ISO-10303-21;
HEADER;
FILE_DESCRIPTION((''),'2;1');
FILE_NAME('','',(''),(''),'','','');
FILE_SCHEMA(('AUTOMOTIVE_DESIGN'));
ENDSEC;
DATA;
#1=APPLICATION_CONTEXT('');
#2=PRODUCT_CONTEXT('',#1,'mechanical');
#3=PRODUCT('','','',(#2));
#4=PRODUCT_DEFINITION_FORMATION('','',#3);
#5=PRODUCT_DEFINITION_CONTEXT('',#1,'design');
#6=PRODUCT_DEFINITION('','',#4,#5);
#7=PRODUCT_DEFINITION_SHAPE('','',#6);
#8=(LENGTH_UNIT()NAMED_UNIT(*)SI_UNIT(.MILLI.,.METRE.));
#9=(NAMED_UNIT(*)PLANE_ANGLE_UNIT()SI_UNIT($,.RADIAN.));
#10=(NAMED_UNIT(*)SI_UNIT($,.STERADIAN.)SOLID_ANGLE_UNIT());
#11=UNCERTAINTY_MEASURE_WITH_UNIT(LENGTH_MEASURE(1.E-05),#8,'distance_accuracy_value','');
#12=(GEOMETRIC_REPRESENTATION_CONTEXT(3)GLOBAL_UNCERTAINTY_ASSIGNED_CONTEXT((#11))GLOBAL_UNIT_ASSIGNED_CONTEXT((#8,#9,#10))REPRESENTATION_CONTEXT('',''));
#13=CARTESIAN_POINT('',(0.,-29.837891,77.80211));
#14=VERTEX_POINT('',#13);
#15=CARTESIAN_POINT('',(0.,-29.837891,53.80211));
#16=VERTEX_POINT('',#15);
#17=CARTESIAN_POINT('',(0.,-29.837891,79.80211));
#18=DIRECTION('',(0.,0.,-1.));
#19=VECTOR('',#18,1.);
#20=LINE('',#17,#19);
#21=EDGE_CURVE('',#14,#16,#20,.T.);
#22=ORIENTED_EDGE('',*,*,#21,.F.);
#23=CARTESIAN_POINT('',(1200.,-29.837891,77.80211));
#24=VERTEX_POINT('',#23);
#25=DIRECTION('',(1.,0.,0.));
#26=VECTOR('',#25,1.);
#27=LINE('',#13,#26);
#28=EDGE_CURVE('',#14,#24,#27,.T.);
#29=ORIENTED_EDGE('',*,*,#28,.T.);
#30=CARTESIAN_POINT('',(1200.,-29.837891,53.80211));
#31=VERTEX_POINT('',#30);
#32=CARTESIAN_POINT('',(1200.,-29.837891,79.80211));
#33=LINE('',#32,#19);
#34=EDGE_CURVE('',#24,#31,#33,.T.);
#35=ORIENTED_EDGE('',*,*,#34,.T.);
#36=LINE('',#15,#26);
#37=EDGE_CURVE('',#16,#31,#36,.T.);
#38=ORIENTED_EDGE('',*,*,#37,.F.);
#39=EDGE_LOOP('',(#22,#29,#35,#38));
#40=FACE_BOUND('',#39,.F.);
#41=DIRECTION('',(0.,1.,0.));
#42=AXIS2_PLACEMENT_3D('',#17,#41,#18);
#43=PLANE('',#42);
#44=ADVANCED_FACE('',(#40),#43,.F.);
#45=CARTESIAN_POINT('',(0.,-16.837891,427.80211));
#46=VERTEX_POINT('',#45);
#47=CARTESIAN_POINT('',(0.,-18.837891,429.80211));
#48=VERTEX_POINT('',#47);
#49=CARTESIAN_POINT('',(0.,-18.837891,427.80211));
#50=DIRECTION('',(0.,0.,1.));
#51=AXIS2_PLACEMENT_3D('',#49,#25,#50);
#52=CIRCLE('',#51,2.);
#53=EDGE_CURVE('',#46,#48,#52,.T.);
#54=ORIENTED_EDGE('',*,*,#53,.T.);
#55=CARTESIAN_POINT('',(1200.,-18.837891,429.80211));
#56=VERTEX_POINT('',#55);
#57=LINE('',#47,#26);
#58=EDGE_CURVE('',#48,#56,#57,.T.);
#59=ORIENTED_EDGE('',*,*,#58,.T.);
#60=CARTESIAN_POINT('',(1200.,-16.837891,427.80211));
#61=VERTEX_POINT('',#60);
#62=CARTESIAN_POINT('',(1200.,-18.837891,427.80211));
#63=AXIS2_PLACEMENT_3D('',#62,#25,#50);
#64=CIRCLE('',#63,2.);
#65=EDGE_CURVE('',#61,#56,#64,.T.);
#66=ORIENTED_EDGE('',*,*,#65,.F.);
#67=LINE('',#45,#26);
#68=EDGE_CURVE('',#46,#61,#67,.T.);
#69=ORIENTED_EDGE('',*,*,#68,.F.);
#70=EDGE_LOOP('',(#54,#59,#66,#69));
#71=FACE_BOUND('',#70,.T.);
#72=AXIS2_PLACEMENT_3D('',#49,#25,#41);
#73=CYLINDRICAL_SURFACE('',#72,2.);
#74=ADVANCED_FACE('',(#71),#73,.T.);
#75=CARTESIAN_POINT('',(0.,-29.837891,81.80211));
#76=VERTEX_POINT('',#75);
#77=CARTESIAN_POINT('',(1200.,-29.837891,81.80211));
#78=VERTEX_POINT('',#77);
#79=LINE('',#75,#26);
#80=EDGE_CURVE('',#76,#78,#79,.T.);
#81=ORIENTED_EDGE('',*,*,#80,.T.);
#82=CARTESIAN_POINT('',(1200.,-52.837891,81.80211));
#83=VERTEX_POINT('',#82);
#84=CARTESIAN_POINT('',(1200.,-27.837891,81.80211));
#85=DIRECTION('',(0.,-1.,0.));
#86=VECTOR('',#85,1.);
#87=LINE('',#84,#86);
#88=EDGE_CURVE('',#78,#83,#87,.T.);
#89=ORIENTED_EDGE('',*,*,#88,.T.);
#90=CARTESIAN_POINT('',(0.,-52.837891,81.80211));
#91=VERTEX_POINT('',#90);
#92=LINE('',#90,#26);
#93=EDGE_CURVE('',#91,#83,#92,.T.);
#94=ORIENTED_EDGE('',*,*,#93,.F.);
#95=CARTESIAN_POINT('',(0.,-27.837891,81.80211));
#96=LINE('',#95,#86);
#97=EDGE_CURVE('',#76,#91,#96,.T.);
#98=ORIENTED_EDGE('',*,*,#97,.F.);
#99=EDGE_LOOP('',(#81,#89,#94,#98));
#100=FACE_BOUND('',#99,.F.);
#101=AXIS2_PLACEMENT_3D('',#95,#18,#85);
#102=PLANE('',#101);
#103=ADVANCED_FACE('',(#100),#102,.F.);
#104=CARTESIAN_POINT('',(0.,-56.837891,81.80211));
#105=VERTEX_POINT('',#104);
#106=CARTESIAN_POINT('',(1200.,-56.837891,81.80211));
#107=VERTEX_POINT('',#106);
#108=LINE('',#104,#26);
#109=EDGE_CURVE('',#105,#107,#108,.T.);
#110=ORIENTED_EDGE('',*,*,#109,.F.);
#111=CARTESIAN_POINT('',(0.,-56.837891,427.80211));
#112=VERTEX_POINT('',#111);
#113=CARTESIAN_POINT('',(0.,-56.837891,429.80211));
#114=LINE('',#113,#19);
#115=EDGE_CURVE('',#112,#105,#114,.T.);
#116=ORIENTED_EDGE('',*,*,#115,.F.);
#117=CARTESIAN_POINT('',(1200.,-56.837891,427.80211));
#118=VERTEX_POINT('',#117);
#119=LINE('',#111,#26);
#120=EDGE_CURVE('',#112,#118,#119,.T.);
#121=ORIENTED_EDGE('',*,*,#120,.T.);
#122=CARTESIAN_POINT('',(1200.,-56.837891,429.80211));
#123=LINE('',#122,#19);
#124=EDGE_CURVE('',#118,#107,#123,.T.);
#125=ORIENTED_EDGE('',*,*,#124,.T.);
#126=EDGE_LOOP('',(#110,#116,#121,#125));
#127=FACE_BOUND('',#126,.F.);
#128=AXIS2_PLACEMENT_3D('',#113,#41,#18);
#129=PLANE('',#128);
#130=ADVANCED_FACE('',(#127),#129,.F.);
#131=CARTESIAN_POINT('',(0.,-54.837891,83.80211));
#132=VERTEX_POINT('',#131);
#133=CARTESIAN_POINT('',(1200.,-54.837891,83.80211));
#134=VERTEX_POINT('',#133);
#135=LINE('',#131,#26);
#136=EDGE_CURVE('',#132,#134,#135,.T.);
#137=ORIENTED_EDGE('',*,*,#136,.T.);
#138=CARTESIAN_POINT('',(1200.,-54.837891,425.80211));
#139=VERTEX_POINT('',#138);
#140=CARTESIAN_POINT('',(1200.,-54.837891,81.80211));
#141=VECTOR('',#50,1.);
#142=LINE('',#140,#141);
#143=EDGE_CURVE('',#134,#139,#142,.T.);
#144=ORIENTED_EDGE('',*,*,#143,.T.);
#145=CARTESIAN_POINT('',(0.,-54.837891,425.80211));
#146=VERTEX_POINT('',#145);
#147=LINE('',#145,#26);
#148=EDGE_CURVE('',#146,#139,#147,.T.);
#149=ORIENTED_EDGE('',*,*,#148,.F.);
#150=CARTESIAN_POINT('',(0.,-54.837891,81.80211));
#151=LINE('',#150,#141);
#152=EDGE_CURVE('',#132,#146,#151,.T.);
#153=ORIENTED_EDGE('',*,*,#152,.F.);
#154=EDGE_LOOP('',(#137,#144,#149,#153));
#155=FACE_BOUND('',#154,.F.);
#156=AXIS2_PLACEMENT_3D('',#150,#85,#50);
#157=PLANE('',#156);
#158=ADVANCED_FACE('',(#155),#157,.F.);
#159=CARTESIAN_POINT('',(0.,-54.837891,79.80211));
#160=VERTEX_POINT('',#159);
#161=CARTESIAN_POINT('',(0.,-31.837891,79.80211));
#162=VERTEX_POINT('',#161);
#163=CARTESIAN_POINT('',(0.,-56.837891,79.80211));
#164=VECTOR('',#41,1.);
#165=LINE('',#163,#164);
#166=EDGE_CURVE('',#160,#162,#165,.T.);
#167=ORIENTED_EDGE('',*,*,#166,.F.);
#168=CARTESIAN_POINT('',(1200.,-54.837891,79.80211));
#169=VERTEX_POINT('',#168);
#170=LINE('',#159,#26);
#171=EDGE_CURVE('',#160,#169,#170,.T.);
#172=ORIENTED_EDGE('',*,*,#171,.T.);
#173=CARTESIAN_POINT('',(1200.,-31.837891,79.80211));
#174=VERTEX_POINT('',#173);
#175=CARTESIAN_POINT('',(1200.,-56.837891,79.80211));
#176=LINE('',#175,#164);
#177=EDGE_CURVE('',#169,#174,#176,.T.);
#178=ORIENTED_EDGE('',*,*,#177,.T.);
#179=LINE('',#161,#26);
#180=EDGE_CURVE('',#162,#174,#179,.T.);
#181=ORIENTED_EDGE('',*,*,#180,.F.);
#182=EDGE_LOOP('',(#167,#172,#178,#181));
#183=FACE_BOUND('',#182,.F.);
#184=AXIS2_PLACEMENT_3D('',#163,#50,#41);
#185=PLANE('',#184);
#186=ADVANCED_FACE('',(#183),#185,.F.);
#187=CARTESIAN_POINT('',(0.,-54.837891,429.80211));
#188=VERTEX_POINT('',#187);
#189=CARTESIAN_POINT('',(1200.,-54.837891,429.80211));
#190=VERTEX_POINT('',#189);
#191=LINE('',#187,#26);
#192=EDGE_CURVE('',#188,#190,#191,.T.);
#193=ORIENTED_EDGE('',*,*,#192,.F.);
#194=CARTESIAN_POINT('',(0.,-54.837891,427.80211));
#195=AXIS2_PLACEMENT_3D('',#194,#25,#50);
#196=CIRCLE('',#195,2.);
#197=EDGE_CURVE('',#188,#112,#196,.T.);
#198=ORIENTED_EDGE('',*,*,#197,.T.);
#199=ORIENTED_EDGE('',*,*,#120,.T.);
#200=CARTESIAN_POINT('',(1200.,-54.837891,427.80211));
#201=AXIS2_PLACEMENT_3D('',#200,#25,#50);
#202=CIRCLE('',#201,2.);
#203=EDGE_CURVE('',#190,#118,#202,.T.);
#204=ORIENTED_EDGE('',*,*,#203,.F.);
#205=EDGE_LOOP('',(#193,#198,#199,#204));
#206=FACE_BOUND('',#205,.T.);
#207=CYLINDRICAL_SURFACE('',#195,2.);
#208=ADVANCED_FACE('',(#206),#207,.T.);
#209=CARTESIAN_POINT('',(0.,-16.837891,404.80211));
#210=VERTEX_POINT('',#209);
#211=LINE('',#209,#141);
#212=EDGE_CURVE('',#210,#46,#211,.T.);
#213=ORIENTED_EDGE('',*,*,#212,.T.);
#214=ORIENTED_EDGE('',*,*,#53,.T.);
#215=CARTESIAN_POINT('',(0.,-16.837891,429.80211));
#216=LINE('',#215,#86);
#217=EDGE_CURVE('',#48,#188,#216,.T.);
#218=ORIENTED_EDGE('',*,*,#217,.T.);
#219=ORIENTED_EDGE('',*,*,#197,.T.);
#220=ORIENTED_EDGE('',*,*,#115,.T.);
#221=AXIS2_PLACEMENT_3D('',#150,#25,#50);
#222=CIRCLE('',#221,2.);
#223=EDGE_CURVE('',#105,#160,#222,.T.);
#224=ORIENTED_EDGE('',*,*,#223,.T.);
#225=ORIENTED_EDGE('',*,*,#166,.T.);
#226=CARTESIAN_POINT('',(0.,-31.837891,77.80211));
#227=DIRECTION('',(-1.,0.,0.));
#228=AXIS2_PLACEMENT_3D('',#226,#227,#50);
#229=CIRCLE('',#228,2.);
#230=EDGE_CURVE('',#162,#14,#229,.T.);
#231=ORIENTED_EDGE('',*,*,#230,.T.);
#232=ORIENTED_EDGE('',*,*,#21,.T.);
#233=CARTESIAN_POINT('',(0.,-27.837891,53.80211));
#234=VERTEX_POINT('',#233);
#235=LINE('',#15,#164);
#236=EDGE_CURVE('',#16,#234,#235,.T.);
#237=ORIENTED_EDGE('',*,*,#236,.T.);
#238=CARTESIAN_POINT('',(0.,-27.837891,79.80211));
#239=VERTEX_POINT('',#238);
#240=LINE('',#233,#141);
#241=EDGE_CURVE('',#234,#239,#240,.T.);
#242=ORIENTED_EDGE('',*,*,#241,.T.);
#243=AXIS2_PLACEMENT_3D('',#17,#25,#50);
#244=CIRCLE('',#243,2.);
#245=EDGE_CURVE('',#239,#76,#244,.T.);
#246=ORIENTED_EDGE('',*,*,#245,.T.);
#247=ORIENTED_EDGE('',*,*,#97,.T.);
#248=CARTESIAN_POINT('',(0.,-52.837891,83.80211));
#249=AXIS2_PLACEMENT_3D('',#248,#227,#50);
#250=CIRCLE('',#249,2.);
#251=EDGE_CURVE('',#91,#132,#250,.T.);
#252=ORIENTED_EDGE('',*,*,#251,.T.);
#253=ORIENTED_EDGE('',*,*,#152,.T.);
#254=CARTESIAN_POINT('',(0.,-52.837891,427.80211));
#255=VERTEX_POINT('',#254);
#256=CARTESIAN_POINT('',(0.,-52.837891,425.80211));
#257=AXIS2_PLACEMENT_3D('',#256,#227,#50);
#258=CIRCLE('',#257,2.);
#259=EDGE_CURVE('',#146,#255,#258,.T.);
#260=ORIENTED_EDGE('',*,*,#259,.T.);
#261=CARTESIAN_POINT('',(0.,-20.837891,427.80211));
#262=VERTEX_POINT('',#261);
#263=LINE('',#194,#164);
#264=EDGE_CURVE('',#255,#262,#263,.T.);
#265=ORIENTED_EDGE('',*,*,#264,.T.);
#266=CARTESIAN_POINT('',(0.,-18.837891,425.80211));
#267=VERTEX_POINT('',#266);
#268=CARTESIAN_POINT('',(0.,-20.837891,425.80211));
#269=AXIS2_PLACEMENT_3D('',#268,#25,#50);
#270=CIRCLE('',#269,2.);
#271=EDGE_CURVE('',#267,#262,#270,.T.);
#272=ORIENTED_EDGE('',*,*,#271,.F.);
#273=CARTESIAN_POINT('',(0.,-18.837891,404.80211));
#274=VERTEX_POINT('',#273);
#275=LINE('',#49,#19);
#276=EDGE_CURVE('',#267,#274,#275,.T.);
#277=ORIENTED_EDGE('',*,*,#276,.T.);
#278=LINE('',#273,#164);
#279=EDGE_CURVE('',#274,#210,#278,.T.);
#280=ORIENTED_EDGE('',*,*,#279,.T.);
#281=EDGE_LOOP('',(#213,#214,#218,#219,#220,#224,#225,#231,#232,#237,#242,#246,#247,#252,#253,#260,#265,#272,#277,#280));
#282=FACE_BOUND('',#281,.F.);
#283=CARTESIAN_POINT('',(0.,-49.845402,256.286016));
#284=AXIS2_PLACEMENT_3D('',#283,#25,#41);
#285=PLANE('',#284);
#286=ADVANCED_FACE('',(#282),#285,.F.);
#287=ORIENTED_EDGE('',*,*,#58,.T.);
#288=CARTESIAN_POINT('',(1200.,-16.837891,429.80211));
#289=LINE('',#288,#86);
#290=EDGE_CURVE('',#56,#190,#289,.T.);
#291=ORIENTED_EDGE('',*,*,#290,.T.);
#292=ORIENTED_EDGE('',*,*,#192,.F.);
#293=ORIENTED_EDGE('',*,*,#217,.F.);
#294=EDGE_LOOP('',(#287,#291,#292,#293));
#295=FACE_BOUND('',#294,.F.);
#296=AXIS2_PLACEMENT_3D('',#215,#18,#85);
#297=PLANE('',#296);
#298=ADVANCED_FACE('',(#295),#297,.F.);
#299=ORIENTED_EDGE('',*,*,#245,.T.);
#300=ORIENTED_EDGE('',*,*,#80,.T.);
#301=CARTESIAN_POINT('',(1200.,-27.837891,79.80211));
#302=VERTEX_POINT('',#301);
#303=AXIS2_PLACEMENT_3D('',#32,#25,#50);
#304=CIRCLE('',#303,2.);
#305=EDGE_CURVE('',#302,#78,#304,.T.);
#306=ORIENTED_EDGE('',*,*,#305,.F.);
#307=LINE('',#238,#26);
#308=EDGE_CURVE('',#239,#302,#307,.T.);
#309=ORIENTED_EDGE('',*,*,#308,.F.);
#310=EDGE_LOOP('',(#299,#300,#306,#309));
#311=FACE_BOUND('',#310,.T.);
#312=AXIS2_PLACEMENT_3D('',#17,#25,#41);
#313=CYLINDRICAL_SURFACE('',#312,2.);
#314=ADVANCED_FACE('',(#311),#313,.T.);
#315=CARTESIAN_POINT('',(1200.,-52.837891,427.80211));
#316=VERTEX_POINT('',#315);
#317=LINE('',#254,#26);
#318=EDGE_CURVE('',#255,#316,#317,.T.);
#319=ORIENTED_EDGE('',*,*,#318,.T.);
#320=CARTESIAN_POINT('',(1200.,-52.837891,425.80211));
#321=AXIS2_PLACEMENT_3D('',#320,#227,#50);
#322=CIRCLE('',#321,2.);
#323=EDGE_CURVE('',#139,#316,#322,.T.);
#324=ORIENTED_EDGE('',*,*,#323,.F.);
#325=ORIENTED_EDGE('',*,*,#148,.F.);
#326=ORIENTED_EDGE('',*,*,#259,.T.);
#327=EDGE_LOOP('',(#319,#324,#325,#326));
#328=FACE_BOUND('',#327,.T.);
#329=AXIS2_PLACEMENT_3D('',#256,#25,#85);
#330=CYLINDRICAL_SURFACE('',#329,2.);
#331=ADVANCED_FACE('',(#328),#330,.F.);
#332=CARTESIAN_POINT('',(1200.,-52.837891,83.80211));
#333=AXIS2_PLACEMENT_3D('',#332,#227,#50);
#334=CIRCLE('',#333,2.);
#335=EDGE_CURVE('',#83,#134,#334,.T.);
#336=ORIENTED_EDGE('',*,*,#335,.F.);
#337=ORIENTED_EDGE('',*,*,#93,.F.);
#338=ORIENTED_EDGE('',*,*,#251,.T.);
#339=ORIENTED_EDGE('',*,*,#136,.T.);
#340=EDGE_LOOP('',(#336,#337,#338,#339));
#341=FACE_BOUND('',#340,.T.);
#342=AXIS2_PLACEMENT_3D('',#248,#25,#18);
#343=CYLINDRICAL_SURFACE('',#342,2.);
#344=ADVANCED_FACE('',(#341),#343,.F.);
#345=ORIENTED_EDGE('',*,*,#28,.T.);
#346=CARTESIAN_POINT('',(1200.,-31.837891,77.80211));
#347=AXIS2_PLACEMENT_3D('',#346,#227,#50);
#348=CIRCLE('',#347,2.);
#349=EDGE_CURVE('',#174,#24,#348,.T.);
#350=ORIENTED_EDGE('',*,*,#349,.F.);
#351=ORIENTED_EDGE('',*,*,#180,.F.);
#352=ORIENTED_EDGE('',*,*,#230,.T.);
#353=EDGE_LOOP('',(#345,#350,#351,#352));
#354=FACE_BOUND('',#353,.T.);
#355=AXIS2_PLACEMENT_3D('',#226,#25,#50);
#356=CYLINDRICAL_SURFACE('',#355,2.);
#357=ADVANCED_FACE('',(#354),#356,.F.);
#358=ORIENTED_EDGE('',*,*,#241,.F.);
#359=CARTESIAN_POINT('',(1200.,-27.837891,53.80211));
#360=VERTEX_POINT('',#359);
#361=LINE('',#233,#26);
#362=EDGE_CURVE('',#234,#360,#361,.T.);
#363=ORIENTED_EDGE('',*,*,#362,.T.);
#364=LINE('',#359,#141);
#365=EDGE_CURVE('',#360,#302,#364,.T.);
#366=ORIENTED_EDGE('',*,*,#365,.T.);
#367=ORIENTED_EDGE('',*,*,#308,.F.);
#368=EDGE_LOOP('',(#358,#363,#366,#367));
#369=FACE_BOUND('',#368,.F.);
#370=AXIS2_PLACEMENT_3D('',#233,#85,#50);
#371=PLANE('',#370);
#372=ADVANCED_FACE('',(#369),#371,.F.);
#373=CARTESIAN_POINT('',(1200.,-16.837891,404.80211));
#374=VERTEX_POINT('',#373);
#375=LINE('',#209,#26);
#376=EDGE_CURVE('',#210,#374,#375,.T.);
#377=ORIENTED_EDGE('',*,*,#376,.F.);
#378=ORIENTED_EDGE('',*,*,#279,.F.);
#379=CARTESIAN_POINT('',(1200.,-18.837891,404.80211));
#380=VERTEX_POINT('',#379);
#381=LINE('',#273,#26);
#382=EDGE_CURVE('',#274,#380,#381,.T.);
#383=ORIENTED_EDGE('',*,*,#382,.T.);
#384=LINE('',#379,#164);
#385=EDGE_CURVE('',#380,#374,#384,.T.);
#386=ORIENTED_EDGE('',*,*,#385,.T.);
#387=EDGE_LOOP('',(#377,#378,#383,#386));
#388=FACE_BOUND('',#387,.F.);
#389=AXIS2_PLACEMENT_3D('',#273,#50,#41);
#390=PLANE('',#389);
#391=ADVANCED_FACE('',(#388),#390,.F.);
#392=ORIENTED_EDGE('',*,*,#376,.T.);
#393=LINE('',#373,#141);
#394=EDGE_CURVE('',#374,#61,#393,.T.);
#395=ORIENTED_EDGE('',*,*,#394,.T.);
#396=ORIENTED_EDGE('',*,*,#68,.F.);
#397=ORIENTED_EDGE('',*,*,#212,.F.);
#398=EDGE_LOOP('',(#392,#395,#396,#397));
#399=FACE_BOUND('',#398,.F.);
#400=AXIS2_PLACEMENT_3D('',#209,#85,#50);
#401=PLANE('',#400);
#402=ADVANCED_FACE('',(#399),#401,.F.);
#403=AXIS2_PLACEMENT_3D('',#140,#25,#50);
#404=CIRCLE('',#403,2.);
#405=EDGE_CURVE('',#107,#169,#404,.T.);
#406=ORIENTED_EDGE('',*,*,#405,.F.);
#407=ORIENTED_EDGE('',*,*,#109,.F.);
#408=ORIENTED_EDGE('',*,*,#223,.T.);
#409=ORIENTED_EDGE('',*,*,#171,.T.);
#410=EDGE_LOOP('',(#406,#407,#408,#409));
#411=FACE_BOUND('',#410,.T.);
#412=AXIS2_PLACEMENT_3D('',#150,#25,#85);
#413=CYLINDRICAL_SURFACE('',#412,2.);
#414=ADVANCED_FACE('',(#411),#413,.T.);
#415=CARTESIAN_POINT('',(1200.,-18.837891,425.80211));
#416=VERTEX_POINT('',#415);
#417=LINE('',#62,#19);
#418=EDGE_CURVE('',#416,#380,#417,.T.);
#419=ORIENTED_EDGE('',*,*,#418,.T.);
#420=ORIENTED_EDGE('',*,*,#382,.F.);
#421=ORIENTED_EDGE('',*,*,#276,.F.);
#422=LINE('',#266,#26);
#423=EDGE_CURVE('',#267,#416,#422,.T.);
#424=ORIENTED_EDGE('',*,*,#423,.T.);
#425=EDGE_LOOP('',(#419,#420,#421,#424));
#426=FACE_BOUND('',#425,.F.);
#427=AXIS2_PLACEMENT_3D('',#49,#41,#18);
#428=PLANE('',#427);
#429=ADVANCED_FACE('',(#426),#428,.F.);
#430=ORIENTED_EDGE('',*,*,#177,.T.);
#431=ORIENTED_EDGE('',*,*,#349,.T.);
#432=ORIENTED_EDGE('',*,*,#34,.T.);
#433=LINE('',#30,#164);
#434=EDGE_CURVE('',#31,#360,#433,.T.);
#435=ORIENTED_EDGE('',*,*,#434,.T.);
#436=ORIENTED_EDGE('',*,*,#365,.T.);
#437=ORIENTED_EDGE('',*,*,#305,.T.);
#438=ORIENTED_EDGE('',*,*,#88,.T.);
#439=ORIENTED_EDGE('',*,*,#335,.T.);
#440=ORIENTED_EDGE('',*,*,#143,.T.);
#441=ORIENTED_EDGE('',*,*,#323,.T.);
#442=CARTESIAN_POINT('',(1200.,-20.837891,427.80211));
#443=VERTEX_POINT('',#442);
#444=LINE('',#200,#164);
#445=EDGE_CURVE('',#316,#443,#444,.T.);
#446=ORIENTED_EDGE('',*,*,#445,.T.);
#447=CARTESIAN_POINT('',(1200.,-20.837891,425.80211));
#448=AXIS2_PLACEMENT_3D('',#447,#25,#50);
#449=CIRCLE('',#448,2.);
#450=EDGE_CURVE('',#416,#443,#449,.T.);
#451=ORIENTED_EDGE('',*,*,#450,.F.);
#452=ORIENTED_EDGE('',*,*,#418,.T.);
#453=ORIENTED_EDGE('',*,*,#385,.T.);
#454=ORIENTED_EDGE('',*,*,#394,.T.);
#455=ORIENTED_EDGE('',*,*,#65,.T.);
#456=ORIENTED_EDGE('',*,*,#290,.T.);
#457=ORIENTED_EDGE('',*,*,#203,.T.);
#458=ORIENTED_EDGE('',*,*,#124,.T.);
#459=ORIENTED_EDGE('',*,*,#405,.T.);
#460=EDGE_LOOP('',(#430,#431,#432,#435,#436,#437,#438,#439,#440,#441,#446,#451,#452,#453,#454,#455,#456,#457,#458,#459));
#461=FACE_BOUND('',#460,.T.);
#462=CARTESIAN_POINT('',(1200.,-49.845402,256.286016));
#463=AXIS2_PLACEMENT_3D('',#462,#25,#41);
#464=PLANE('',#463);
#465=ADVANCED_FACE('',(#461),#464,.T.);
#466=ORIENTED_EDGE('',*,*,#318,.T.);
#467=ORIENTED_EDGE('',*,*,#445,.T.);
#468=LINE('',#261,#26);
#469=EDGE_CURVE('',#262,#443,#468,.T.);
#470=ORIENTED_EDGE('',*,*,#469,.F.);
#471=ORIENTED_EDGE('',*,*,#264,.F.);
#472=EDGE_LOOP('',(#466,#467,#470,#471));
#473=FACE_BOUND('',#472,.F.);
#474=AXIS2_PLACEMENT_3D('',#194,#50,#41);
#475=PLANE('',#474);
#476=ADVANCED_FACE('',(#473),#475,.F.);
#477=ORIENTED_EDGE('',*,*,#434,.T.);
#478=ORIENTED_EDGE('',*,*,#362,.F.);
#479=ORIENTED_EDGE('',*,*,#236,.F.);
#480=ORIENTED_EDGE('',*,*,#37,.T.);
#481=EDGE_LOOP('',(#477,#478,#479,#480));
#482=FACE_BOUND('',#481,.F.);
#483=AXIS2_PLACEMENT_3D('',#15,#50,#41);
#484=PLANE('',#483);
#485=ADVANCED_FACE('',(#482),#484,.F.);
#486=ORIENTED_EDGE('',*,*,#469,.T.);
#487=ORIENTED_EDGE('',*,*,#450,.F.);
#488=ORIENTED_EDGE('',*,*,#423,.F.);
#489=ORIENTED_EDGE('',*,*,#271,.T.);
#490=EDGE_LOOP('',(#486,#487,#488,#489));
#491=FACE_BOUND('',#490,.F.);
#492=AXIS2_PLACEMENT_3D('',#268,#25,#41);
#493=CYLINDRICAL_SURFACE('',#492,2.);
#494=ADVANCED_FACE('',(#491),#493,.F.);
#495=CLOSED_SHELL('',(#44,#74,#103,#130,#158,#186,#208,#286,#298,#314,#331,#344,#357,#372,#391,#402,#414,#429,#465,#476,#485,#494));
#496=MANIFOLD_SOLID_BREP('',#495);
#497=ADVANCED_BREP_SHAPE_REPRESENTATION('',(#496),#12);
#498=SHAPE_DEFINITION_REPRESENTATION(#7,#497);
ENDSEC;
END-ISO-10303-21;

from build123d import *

# Parameters (mm, degrees)
F1_DEPTH = 1200
F2_R     = 2


# Not quite as in the source:
# - a feature names something its author has since deleted; it is built from what else it names


with BuildPart() as f1:
    # F0 (on Right) → F1 (new body)
    with BuildSketch(Plane.YZ):
        Polygon((-18.8378913403, 427.8021101952), (-18.8378913403, 404.8021101952), (-16.8378913403, 404.8021101952), (-16.8378913403, 429.8021101952), (-56.8378913403, 429.8021101952), (-56.8378913403, 79.8021101952), (-29.8378913403, 79.8021101952), (-29.8378913403, 53.8021101952), (-27.8378913403, 53.8021101952), (-27.8378913403, 81.8021101952), (-54.8378913403, 81.8021101952), (-54.8378913403, 427.8021101952), align=None)
    extrude(amount=F1_DEPTH)

    # F2
    f2_edges = [f1.edges().sort_by_distance(p)[0] for p in [
        (600, -56.837891, 429.80211),
        (600, -16.837891, 429.80211),
        (600, -56.837891, 79.80211),
        (600, -27.837891, 81.80211),
        (600, -54.837891, 81.80211),
        (600, -29.837891, 79.80211),
        (600, -18.837891, 427.80211),
        (600, -54.837891, 427.80211),
    ]]
    fillet(f2_edges, radius=F2_R)


solid = f1.part
